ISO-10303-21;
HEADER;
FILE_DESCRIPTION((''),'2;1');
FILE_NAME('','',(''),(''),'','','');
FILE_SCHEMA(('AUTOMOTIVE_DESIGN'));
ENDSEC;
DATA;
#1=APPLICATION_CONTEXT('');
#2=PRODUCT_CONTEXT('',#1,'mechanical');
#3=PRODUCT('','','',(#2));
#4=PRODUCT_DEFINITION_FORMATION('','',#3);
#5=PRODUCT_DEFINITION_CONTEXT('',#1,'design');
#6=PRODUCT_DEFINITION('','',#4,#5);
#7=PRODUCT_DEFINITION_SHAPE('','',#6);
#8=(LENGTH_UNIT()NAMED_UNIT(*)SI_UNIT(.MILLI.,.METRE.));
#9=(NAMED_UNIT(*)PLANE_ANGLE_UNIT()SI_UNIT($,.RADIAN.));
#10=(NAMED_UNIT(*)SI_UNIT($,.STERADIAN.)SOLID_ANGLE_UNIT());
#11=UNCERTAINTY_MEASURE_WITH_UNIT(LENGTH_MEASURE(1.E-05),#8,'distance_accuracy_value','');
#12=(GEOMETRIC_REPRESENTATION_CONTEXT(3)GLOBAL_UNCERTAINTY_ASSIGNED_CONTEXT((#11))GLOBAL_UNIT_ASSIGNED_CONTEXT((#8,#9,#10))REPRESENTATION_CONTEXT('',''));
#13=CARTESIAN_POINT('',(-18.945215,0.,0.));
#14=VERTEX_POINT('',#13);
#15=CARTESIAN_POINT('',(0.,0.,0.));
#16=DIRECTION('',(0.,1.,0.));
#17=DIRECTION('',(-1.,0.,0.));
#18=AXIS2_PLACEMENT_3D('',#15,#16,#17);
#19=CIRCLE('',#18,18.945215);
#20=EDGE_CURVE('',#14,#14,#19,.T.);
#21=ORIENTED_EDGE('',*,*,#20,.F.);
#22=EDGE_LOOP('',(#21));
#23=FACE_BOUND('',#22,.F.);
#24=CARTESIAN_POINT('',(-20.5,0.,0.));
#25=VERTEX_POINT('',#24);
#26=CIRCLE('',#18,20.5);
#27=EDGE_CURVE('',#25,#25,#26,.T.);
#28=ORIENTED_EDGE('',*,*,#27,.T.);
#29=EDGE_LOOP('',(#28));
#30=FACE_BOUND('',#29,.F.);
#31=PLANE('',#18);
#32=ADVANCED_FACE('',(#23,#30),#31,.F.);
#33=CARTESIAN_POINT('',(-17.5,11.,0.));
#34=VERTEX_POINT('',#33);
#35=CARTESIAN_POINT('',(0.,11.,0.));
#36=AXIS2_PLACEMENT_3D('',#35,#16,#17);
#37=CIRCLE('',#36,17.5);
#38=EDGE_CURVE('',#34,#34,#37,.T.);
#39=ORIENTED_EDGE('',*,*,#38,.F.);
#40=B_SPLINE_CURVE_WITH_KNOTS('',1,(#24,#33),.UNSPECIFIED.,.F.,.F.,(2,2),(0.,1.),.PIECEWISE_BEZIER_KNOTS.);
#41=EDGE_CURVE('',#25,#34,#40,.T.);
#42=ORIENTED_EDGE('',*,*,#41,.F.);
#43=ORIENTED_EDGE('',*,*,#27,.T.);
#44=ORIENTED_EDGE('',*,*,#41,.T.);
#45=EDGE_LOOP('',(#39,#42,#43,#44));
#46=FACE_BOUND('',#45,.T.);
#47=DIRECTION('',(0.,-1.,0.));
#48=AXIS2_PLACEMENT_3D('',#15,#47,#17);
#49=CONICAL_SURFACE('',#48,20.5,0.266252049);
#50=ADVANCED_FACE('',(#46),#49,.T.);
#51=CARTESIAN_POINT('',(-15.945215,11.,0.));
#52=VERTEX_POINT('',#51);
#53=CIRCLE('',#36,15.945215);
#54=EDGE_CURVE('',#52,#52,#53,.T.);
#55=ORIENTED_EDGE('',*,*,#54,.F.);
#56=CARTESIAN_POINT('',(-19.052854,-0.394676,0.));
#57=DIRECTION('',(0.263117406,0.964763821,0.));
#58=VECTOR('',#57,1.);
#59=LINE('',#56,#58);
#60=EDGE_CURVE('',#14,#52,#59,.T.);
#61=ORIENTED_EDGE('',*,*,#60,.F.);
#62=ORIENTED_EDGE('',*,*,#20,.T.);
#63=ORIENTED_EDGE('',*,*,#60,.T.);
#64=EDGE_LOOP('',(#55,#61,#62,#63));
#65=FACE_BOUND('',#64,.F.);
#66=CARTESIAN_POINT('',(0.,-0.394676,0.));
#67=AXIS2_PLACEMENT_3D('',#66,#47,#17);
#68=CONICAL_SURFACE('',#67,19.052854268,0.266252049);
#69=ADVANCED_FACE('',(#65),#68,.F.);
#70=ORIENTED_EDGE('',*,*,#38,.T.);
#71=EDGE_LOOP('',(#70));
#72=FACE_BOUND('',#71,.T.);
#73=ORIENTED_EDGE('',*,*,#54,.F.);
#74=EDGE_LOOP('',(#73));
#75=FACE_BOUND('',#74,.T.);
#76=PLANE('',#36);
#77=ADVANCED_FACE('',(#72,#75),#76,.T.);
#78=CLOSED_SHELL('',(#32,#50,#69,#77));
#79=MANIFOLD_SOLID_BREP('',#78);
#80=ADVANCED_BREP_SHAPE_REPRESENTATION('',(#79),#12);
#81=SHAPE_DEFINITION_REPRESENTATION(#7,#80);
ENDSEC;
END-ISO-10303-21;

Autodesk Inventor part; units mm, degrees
ref_plane "YZ Plane" through (0, 0, 0) normal (1, 0, 0) x (0, 1, 0)
ref_plane "XY Plane" through (0, 0, 0) normal (0, 0, 1) x (1, 0, 0)
sketch "Szkic6" plane through (0, 0, 0) normal (0, 1, 0) x (-1, 0, 0)
  circle A0 centre (0, 0) radius 20.5
  dimension "d33" = 41
ref_plane "Płaszczyzna konstrukcyjna1" through (0, 11, 0) normal (0, 1, 0) x (-1, 0, 0)
sketch "Szkic7" plane through (0, 11, 0) normal (0, 1, 0) x (-1, 0, 0)
  circle A0 centre (0, 0) radius 17.5
  dimension "d35" = 35
loft "Wyciągnięcie złożone1" add profiles "Szkic6", "Szkic7"
shell "Skorupa1" thickness 1.5 removed faces 2 at (-4.3663, 11, -1.0762) at (-3.5154, 0, 4.1371)
equation "\"d33\" = OD1"
equation "\"d35\" = OD2"
equation "\"d52\" = THK"
equation "\"SzerokośćGięciaPodcięcia\" = Grubość"
equation "\"RozmiarPodcięciaNarożnika\" = 4 * Grubość"
equation "\"PromieńPrzejścia\" = PromieńGięcia"
equation "\"Rozmiar_promienia_Jacobiego\" = PromieńGięcia"
equation "\"Wielk_odstępu\" = Grubość"
equation "\"d2\" = PromieńGięcia"
equation "\"d23\" = PromieńGięcia"
equation "\"OD1\" = 41"
equation "\"OD2\" = 35"
equation "\"L\" = 11"
equation "\"THK\" = 1.5"
equation "\"d34\" = L"
equation "\"Grubość\" = 1.5"
equation "\"PromieńGięcia\" = 3"
properties part number "Redukcja symetryczna Ø41x35x1,5 L=11" material "304"
